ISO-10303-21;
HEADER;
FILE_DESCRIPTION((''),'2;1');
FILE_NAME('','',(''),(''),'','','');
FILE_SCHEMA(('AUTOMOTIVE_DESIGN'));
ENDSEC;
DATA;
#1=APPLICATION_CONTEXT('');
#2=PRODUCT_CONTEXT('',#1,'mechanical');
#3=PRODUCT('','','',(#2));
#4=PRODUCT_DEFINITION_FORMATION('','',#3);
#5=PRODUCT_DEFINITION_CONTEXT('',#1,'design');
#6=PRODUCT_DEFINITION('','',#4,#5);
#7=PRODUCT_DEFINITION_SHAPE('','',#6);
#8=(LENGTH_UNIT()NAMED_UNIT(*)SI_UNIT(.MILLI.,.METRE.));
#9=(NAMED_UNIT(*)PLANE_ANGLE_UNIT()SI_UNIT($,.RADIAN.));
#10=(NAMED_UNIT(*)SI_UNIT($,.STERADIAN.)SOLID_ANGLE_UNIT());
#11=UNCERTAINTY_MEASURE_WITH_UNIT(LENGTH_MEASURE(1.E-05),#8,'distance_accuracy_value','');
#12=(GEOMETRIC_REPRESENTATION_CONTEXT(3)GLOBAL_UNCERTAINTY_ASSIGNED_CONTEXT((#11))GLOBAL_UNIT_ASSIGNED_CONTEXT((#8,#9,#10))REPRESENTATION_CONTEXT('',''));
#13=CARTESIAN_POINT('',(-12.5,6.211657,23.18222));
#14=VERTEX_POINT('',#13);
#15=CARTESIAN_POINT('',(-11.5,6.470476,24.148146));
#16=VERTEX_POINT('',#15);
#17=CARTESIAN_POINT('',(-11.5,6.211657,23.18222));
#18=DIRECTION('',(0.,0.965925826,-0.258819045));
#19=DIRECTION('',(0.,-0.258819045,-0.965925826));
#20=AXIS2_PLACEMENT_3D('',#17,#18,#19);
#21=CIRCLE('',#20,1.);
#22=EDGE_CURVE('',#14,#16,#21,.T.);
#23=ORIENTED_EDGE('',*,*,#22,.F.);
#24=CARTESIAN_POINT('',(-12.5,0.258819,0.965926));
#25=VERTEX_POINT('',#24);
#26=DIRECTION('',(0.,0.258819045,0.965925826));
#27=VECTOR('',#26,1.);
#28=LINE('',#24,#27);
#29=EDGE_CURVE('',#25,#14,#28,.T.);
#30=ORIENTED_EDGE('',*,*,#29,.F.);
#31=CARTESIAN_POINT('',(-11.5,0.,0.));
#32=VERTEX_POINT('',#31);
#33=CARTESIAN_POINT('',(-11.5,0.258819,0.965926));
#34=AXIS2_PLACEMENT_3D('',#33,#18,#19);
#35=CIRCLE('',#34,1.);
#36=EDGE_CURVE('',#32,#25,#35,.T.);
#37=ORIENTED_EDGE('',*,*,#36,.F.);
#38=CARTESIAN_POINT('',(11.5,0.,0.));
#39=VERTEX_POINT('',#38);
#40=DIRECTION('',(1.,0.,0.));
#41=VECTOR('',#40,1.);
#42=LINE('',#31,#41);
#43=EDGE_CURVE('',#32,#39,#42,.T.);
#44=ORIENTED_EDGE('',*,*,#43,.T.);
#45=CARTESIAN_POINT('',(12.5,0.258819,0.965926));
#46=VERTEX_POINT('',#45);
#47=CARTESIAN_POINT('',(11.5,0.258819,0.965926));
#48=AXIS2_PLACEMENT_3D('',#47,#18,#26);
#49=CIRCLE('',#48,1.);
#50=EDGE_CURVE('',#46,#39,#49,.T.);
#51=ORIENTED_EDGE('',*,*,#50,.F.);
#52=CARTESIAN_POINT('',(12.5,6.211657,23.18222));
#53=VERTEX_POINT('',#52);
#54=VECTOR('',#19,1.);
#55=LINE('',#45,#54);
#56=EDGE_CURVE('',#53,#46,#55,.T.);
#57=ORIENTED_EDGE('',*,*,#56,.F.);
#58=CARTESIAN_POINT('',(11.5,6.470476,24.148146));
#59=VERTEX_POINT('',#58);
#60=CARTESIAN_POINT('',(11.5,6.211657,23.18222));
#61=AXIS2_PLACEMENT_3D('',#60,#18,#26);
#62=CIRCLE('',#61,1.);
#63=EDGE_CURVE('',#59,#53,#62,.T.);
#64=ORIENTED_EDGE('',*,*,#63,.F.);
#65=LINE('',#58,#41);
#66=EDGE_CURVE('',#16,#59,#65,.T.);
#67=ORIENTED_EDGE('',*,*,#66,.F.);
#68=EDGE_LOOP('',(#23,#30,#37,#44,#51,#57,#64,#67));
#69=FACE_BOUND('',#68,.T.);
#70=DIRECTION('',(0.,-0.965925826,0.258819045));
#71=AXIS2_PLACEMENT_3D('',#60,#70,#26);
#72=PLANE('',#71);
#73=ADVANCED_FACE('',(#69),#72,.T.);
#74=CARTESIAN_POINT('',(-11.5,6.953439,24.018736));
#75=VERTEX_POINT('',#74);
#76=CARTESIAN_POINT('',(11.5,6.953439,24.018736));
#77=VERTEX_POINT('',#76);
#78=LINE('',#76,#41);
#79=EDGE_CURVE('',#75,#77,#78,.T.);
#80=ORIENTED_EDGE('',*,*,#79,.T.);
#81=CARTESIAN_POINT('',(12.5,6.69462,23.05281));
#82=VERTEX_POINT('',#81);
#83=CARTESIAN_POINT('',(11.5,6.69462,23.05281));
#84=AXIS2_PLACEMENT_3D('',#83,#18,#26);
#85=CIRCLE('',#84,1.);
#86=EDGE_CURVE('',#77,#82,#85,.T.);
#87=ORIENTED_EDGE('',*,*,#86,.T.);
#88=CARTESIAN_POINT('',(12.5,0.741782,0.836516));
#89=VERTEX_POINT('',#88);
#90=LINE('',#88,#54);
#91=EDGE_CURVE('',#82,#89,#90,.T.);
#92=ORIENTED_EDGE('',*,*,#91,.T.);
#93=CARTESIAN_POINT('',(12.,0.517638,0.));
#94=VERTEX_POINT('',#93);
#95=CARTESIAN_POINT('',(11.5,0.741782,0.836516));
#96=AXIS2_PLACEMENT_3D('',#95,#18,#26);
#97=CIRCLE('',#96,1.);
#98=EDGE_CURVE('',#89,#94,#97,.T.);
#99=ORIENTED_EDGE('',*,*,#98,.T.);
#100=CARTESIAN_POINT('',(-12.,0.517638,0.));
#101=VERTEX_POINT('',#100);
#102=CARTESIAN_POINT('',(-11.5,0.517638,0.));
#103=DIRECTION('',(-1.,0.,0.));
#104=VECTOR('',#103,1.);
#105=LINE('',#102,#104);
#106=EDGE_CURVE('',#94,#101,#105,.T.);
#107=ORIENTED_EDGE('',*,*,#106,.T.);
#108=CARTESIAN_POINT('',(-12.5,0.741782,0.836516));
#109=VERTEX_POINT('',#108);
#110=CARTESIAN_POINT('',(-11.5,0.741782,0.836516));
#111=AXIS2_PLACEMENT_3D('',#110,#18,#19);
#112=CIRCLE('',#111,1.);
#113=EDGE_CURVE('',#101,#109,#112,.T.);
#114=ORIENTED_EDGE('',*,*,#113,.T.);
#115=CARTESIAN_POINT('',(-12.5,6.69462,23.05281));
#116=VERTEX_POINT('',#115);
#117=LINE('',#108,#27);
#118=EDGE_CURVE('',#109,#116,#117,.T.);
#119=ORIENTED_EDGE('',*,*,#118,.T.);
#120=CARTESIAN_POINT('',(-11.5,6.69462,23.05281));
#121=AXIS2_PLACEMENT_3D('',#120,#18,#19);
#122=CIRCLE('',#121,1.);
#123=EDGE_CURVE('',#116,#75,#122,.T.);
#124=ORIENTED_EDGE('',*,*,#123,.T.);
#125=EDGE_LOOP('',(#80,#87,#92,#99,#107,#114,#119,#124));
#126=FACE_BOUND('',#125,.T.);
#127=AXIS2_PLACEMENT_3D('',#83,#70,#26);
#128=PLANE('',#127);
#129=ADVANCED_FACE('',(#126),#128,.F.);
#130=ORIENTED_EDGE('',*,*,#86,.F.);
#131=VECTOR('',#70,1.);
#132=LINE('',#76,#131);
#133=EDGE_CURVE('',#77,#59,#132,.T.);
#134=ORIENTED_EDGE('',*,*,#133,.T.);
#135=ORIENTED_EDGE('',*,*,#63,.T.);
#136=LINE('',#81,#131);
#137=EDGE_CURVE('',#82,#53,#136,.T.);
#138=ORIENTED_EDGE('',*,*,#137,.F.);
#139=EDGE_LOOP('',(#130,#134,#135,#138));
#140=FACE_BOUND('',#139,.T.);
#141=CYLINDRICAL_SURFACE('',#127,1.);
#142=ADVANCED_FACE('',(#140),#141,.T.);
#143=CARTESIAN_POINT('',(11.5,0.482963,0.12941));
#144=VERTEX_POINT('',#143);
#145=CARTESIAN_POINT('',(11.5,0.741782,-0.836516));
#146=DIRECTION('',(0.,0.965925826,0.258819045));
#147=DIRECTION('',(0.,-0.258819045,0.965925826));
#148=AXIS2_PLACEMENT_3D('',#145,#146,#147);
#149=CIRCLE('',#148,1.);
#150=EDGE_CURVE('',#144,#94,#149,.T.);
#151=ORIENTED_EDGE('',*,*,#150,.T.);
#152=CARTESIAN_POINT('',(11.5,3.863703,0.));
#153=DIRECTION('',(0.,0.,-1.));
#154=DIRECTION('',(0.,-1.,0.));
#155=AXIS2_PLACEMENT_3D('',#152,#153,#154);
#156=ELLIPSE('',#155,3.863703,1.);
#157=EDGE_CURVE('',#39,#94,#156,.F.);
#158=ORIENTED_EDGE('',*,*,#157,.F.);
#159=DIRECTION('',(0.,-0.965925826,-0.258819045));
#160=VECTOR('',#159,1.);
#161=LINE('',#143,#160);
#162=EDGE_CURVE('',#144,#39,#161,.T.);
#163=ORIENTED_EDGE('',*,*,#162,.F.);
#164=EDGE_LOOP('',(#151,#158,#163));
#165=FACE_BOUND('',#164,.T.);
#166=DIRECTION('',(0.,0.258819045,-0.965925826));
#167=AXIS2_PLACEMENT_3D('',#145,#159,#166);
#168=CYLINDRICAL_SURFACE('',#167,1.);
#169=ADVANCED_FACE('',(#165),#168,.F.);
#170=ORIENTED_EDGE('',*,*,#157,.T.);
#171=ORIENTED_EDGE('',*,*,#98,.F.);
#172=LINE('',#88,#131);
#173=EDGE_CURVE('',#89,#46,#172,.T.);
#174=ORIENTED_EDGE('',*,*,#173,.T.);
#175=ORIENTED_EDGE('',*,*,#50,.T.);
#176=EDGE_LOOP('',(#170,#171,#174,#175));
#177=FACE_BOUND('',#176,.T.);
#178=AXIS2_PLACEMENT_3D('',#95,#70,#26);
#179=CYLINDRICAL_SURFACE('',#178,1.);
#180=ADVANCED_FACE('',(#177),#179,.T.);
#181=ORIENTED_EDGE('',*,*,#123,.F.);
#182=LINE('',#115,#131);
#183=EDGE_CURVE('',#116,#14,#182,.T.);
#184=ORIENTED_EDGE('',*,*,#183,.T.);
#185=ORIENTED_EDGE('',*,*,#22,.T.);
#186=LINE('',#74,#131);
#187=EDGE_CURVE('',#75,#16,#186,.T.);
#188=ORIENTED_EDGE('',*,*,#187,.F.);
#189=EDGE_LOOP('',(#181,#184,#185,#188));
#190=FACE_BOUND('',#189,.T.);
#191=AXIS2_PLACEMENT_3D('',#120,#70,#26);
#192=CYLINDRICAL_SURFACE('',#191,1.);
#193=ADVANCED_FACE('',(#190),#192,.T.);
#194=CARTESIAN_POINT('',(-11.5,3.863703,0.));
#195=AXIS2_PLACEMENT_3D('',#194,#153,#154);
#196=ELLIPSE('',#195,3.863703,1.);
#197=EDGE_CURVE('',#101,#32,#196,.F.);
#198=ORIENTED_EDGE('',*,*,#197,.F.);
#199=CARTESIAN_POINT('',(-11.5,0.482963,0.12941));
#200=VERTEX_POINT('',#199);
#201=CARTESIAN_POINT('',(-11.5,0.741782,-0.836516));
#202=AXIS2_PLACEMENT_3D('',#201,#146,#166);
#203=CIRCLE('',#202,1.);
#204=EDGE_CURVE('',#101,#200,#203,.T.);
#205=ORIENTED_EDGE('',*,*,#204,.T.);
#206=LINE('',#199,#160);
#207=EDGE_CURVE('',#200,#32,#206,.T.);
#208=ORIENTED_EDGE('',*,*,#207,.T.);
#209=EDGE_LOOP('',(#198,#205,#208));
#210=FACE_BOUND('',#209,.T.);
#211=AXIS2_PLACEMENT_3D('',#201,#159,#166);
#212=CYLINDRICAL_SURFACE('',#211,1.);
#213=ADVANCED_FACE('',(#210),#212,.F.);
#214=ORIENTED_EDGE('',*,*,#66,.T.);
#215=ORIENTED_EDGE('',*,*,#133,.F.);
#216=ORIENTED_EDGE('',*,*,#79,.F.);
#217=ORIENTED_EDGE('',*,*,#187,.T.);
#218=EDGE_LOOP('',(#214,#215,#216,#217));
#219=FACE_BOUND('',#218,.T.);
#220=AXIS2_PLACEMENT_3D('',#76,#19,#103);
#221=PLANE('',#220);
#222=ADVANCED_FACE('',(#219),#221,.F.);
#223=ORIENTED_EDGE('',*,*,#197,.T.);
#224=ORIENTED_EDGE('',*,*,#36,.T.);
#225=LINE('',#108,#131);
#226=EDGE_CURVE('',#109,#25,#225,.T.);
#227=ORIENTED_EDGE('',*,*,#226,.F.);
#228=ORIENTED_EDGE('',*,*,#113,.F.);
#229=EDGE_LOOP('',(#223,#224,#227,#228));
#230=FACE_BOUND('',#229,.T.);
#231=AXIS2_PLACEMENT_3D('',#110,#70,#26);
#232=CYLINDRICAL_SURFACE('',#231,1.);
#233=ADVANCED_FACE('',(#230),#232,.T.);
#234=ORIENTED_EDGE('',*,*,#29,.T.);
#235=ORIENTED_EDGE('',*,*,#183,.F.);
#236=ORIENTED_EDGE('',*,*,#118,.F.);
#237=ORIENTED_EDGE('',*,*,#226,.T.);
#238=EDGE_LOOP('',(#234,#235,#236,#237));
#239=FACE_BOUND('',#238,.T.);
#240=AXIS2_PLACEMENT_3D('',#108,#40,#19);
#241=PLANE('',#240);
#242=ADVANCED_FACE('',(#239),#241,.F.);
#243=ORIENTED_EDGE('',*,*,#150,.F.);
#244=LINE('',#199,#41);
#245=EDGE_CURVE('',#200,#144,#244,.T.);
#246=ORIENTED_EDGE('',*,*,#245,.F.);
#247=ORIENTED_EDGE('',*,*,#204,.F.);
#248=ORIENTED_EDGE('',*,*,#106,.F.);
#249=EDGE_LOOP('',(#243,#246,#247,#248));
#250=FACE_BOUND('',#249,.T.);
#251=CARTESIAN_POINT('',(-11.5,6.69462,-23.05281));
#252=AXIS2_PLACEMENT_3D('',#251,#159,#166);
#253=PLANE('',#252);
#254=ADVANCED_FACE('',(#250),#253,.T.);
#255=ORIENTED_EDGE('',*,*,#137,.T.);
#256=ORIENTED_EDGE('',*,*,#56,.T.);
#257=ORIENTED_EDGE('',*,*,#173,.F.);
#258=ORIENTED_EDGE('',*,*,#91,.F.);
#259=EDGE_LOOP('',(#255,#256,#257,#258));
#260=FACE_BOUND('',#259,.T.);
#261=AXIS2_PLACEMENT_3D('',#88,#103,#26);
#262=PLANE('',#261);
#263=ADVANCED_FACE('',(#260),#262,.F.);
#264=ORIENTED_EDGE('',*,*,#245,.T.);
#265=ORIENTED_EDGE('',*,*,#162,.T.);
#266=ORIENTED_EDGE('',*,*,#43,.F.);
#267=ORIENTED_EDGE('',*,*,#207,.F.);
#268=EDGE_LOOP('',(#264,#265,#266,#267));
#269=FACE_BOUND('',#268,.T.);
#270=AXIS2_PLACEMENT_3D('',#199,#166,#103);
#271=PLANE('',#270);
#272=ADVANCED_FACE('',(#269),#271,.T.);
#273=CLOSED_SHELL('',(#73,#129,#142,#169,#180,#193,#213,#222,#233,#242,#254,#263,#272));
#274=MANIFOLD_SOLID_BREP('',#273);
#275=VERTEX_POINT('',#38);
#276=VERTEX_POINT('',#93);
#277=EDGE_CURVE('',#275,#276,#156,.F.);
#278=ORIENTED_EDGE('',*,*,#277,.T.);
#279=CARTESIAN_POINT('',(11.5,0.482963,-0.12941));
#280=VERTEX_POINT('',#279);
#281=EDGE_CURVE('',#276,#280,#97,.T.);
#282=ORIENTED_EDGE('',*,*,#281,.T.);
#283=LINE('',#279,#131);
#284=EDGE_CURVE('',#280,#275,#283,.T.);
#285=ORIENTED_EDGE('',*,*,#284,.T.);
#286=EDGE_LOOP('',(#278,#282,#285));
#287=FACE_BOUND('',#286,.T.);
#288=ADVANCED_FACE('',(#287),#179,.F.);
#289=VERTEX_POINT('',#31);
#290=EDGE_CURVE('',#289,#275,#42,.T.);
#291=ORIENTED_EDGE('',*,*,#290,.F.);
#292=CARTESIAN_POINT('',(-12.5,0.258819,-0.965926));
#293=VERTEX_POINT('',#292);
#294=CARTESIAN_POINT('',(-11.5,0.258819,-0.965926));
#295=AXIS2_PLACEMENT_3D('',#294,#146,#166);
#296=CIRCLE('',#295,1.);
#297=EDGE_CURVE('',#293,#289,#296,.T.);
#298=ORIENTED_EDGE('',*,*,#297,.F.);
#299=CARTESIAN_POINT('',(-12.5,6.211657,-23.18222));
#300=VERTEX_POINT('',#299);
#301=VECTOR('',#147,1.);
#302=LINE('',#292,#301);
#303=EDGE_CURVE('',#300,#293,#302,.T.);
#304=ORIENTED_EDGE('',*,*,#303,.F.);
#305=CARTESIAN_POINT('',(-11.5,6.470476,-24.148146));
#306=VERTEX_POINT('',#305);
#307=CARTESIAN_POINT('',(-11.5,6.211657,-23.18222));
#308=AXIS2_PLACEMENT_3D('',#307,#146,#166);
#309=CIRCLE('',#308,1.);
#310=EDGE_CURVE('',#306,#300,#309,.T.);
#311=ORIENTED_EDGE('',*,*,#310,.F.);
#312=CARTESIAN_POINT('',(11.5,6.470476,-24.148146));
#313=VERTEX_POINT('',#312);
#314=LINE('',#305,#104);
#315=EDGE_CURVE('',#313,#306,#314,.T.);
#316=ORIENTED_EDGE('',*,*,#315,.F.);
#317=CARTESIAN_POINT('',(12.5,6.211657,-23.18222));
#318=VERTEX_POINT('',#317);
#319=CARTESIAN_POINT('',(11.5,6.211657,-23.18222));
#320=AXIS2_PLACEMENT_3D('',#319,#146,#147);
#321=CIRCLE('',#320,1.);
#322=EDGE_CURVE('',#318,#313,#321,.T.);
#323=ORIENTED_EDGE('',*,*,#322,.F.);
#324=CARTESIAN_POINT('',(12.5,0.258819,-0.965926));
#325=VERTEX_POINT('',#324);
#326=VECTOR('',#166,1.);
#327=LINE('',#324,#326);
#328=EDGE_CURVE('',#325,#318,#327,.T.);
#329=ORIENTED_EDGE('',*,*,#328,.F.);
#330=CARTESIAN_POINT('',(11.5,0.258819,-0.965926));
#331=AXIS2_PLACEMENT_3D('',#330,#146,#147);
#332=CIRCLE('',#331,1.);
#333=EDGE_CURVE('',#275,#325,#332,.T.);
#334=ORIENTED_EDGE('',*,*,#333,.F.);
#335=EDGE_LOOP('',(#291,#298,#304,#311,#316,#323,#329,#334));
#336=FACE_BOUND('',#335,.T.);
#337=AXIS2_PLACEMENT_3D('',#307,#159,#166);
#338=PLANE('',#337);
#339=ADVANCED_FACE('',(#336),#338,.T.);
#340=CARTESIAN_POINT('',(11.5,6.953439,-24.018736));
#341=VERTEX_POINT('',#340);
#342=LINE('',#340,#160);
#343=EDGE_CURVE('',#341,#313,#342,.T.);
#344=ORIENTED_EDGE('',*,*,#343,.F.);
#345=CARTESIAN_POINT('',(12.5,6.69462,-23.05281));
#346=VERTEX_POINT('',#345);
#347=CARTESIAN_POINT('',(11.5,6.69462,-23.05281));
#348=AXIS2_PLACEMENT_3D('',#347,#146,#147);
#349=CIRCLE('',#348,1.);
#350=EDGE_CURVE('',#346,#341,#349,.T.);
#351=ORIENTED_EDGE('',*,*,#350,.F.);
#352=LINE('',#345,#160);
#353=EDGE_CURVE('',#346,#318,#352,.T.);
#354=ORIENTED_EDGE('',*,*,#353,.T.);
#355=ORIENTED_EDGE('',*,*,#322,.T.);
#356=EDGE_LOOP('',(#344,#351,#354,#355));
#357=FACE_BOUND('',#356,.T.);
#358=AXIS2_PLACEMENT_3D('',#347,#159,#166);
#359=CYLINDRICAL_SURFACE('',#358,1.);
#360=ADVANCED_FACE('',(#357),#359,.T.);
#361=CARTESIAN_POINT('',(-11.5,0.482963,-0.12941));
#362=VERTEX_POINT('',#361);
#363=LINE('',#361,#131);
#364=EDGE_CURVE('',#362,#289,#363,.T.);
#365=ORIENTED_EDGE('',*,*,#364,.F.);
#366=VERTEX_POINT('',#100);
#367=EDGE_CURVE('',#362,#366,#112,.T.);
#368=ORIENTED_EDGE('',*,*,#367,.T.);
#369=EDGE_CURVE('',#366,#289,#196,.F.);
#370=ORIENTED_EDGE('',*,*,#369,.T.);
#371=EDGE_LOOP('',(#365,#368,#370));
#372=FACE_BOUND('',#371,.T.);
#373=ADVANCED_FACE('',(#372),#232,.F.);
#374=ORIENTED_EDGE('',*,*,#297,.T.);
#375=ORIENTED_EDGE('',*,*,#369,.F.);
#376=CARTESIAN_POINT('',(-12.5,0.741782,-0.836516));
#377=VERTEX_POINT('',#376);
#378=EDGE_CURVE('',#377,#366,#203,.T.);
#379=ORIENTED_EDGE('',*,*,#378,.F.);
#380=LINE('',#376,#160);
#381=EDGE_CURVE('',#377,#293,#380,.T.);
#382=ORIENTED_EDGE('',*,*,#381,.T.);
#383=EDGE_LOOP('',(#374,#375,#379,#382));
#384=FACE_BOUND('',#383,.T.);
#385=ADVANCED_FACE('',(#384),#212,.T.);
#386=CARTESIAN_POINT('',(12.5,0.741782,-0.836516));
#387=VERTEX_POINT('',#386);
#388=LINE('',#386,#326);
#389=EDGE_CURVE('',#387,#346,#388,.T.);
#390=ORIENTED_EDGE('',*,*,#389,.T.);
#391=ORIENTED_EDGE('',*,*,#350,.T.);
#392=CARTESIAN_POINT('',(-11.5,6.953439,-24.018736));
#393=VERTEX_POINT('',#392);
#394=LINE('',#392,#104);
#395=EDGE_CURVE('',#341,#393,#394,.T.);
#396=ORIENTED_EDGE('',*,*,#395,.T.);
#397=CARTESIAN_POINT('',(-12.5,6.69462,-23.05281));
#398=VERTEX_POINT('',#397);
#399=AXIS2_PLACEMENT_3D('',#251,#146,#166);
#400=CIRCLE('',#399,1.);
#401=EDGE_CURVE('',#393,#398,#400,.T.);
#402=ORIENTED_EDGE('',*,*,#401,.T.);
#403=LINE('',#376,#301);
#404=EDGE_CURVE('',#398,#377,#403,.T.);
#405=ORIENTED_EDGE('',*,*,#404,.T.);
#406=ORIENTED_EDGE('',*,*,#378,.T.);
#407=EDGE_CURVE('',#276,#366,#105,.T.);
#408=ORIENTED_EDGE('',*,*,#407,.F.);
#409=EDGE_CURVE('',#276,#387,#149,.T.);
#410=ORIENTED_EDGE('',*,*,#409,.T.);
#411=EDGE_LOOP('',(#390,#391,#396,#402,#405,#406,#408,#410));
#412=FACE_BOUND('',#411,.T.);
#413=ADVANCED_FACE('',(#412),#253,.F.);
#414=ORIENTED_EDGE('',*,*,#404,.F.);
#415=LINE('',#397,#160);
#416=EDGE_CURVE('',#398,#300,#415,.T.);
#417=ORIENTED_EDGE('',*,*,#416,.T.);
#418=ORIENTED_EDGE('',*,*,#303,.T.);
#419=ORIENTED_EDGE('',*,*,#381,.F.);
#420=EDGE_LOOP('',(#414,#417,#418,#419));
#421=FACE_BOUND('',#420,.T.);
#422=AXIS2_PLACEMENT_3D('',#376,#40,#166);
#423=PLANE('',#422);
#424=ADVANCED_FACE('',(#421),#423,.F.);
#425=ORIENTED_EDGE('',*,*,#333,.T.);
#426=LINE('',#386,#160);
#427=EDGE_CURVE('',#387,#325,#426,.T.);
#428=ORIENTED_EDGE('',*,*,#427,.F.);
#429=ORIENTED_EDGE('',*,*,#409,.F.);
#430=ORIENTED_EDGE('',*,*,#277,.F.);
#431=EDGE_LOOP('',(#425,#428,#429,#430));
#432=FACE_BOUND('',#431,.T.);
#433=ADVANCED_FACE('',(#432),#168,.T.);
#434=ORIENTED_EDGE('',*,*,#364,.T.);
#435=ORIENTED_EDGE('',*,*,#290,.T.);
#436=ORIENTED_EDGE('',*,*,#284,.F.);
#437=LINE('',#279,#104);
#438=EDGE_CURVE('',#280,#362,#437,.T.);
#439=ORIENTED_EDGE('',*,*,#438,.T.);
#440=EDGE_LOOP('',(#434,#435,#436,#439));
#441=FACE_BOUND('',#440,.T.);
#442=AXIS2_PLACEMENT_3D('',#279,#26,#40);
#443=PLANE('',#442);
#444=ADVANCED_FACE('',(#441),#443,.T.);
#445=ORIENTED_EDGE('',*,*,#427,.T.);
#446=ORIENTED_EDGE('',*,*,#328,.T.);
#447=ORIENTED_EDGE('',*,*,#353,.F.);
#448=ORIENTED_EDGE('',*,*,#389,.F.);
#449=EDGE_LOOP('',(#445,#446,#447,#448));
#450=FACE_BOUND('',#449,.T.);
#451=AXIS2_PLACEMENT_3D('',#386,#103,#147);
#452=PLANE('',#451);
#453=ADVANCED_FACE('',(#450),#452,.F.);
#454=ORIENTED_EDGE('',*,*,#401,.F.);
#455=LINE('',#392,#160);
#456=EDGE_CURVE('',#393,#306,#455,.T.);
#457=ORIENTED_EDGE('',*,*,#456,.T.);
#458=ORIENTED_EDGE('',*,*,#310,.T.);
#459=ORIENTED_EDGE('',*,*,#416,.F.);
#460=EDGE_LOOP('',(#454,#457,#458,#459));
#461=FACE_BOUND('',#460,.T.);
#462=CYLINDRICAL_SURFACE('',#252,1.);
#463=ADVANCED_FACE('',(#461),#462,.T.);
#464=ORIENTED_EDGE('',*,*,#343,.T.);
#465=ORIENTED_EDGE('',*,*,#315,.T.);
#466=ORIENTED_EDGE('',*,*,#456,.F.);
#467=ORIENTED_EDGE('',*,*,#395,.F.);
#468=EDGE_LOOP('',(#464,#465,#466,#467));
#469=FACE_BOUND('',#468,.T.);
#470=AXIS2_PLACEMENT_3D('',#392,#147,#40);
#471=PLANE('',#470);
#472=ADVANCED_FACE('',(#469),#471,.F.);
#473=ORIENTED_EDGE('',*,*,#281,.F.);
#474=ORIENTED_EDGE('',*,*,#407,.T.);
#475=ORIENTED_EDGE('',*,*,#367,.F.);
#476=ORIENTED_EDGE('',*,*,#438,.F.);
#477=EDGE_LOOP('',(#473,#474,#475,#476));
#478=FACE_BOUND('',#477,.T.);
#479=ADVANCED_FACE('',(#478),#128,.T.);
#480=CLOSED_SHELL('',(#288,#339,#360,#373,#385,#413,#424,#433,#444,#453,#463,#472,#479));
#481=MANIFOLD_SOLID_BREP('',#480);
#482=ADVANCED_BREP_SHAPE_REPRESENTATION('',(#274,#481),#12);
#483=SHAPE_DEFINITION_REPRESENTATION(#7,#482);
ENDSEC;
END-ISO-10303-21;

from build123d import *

# Parameters (mm, degrees)
EXTRUDE_1_DEPTH          = 0.5
MOVE_BODY_1_ANGLE        = 15
PATTERN_CIRCULAR_1_COUNT = 2
OTHER_2_DEPTH            = 0.5
OTHER_2_2_DEPTH          = 0.5


# Read off the part's stored shape, not the designer's step: 相交2
with BuildPart() as part:
    # 草图1 → 凸台-拉伸1 (new body)
    with BuildSketch(Plane(origin=(0, 0, 0), x_dir=(1, 0, 0), z_dir=(0, 1, 0))):
        with BuildLine():
            Line((-11.5, 0), (11.5, 0))
            ThreePointArc((11.5, 0), (12.207106781, 0.292893219), (12.5, 1))
            Line((12.5, 1), (12.5, 24))
            ThreePointArc((12.5, 24), (12.207106781, 24.707106781), (11.5, 25))
            Line((11.5, 25), (-11.5, 25))
            ThreePointArc((-11.5, 25), (-12.207106781, 24.707106781), (-12.5, 24))
            Line((-12.5, 24), (-12.5, 1))
            ThreePointArc((-12.5, 1), (-12.207106781, 0.292893219), (-11.5, 0))
        make_face()
    extrude(amount=EXTRUDE_1_DEPTH)


with BuildPart() as part_1:
    # Move Body 1: moved
    add(part.part.rotate(Axis((0, 0, 0), (1, 0, 0)), MOVE_BODY_1_ANGLE))


with BuildPart() as pattern_circular_1_1:
    # 阵列(圆周)1: pattern copy
    add(part_1.part.rotate(Axis((0, 0, 0), (0, 1, 0)), 1 * 360 / PATTERN_CIRCULAR_1_COUNT))

    # 相交2 outline → 相交2 (cut)
    with BuildSketch(Plane(origin=(0, 0, 0), x_dir=(1, 0, 0), z_dir=(0, 0.9659258262890682, 0.2588190451025211))):
        with BuildLine():
            Line((-11.5, 0), (11.5, 0))
            ThreePointArc((11.5, 0), (11.758819045, 0.034074174), (12, 0.133974596))
            Line((12, 0.133974596), (13, 0.711324861))
            Line((13, 0.711324861), (13, 2))
            Line((13, 2), (-13, 2))
            Line((-13, 2), (-13, 0.711324861))
            Line((-13, 0.711324861), (-12, 0.133974596))
            ThreePointArc((-12, 0.133974596), (-11.758819045, 0.034074174), (-11.5, 0))
        make_face()
    extrude(amount=OTHER_2_DEPTH, mode=Mode.SUBTRACT)


with BuildPart() as part_2:
    add(part_1.part)

    # Other 2 2 outline → Other 2 2 (cut)
    with BuildSketch(Plane(origin=(0, 0, 0), x_dir=(1, 0, 0), z_dir=(0, 0.9659258262890682, -0.2588190451025211))):
        with BuildLine():
            Line((11.5, 0), (-11.5, 0))
            ThreePointArc((-11.5, 0), (-11.758819045, -0.034074174), (-12, -0.133974596))
            Line((-12, -0.133974596), (-13, -0.711324861))
            Line((-13, -0.711324861), (-13, -2))
            Line((-13, -2), (13, -2))
            Line((13, -2), (13, -0.711324861))
            Line((13, -0.711324861), (12, -0.133974596))
            ThreePointArc((12, -0.133974596), (11.758819045, -0.034074174), (11.5, 0))
        make_face()
    extrude(amount=OTHER_2_2_DEPTH, mode=Mode.SUBTRACT)


solid = Compound([pattern_circular_1_1.part, part_2.part])
